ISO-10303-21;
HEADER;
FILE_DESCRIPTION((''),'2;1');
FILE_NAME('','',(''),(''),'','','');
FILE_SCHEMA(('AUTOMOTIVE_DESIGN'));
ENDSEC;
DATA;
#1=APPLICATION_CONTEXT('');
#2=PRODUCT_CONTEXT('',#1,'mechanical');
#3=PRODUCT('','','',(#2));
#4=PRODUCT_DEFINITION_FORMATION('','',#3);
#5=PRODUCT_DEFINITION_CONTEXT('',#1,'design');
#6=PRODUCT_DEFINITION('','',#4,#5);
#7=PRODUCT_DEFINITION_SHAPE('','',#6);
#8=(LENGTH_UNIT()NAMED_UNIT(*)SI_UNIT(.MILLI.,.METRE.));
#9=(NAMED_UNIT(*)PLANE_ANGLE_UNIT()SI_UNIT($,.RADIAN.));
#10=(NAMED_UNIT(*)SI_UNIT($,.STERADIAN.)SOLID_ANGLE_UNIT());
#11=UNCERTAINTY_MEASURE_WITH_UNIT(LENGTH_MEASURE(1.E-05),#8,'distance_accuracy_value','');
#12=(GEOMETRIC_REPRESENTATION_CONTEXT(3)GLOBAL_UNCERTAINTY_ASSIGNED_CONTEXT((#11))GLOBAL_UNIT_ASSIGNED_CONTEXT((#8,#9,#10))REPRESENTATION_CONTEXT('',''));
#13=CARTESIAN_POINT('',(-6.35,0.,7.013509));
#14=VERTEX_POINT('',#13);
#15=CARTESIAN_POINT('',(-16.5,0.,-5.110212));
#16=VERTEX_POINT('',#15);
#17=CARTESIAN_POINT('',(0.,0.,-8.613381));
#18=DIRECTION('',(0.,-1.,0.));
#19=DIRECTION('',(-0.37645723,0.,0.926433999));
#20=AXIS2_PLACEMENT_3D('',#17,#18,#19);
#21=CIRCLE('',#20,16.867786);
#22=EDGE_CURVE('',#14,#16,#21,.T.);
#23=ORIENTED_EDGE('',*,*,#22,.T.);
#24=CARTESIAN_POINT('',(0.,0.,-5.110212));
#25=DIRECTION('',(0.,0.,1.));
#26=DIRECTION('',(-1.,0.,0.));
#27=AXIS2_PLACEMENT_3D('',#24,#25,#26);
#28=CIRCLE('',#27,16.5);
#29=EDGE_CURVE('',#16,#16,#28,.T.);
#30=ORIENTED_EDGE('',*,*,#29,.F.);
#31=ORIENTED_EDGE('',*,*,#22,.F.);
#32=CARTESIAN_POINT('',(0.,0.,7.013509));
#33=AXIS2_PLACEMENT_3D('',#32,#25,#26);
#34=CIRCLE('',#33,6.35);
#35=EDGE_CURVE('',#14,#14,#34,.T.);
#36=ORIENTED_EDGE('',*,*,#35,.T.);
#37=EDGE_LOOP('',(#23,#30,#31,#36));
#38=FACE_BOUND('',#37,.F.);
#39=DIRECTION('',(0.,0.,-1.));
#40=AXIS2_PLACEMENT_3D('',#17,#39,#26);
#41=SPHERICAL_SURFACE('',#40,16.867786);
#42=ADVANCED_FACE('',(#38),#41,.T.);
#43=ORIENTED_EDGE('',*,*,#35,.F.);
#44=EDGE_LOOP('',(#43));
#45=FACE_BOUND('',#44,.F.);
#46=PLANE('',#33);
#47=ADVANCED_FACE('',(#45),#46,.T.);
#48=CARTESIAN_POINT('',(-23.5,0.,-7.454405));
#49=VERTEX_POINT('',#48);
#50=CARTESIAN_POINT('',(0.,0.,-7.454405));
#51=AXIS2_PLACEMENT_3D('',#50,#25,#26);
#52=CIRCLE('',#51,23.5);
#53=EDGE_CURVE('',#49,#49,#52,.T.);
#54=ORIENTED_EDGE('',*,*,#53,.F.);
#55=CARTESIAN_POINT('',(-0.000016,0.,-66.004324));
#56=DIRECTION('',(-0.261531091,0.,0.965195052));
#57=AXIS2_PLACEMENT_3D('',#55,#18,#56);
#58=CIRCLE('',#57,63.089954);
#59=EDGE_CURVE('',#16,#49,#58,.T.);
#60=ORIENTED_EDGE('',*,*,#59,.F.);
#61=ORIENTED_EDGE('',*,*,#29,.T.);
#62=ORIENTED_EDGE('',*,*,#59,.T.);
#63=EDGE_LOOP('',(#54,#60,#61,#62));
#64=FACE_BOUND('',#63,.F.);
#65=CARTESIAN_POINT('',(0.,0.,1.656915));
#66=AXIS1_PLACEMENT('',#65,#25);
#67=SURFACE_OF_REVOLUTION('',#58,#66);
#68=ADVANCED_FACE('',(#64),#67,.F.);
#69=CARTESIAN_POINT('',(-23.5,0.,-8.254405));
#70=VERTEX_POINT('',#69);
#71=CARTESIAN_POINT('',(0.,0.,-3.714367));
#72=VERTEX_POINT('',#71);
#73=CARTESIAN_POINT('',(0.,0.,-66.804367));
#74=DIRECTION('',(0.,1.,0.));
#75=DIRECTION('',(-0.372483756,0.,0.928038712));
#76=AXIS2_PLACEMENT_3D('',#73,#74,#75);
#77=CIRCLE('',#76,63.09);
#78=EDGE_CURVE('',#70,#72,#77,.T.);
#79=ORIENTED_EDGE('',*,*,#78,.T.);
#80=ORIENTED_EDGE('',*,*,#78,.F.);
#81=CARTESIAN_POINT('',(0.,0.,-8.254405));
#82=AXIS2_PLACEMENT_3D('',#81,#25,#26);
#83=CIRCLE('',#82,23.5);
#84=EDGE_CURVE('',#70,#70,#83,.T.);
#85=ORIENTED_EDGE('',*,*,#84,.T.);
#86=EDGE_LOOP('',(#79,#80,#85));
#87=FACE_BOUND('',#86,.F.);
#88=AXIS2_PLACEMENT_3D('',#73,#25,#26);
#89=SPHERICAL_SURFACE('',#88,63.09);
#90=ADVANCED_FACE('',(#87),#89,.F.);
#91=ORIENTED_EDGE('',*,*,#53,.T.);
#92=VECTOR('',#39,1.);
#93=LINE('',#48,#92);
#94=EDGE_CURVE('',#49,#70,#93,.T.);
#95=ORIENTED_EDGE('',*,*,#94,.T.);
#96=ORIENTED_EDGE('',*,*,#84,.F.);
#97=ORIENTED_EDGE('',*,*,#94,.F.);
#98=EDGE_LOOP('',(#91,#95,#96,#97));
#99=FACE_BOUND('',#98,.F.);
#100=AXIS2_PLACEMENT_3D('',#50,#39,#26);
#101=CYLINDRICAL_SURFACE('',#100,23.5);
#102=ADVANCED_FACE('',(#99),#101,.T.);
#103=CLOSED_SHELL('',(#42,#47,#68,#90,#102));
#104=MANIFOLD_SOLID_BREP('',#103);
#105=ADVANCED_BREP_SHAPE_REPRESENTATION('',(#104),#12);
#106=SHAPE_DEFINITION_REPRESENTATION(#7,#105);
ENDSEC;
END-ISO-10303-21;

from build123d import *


# Not quite as in the source:
# - ends of sketch curves that miss each other by under 0.0002 mm in the source are joined


with BuildPart() as f1:
    # F0 (on Front) → F1 (revolve)
    with BuildSketch(Plane.XZ):
        with BuildLine():
            ThreePointArc((-23.500000147, -8.2544046337), (-11.967267322, -4.859773912), (0, -3.714367))
            Line((0, -3.714367), (0, 7.013509))
            Line((0, 7.013509), (-6.35, 7.013509))
            ThreePointArc((-6.35, 7.013509), (-12.9335526331, 2.2146110343), (-16.5000003334, -5.1102123602))
            ThreePointArc((-16.5000003334, -5.1102123602), (-20.0343158619, -6.1798378506), (-23.500000147, -7.4544046337))
            Line((-23.500000147, -7.4544046337), (-23.500000147, -8.2544046337))
        make_face()
    revolve(axis=Axis((0, 0, 1.6569155), (0, 0, 1)))


solid = f1.part
